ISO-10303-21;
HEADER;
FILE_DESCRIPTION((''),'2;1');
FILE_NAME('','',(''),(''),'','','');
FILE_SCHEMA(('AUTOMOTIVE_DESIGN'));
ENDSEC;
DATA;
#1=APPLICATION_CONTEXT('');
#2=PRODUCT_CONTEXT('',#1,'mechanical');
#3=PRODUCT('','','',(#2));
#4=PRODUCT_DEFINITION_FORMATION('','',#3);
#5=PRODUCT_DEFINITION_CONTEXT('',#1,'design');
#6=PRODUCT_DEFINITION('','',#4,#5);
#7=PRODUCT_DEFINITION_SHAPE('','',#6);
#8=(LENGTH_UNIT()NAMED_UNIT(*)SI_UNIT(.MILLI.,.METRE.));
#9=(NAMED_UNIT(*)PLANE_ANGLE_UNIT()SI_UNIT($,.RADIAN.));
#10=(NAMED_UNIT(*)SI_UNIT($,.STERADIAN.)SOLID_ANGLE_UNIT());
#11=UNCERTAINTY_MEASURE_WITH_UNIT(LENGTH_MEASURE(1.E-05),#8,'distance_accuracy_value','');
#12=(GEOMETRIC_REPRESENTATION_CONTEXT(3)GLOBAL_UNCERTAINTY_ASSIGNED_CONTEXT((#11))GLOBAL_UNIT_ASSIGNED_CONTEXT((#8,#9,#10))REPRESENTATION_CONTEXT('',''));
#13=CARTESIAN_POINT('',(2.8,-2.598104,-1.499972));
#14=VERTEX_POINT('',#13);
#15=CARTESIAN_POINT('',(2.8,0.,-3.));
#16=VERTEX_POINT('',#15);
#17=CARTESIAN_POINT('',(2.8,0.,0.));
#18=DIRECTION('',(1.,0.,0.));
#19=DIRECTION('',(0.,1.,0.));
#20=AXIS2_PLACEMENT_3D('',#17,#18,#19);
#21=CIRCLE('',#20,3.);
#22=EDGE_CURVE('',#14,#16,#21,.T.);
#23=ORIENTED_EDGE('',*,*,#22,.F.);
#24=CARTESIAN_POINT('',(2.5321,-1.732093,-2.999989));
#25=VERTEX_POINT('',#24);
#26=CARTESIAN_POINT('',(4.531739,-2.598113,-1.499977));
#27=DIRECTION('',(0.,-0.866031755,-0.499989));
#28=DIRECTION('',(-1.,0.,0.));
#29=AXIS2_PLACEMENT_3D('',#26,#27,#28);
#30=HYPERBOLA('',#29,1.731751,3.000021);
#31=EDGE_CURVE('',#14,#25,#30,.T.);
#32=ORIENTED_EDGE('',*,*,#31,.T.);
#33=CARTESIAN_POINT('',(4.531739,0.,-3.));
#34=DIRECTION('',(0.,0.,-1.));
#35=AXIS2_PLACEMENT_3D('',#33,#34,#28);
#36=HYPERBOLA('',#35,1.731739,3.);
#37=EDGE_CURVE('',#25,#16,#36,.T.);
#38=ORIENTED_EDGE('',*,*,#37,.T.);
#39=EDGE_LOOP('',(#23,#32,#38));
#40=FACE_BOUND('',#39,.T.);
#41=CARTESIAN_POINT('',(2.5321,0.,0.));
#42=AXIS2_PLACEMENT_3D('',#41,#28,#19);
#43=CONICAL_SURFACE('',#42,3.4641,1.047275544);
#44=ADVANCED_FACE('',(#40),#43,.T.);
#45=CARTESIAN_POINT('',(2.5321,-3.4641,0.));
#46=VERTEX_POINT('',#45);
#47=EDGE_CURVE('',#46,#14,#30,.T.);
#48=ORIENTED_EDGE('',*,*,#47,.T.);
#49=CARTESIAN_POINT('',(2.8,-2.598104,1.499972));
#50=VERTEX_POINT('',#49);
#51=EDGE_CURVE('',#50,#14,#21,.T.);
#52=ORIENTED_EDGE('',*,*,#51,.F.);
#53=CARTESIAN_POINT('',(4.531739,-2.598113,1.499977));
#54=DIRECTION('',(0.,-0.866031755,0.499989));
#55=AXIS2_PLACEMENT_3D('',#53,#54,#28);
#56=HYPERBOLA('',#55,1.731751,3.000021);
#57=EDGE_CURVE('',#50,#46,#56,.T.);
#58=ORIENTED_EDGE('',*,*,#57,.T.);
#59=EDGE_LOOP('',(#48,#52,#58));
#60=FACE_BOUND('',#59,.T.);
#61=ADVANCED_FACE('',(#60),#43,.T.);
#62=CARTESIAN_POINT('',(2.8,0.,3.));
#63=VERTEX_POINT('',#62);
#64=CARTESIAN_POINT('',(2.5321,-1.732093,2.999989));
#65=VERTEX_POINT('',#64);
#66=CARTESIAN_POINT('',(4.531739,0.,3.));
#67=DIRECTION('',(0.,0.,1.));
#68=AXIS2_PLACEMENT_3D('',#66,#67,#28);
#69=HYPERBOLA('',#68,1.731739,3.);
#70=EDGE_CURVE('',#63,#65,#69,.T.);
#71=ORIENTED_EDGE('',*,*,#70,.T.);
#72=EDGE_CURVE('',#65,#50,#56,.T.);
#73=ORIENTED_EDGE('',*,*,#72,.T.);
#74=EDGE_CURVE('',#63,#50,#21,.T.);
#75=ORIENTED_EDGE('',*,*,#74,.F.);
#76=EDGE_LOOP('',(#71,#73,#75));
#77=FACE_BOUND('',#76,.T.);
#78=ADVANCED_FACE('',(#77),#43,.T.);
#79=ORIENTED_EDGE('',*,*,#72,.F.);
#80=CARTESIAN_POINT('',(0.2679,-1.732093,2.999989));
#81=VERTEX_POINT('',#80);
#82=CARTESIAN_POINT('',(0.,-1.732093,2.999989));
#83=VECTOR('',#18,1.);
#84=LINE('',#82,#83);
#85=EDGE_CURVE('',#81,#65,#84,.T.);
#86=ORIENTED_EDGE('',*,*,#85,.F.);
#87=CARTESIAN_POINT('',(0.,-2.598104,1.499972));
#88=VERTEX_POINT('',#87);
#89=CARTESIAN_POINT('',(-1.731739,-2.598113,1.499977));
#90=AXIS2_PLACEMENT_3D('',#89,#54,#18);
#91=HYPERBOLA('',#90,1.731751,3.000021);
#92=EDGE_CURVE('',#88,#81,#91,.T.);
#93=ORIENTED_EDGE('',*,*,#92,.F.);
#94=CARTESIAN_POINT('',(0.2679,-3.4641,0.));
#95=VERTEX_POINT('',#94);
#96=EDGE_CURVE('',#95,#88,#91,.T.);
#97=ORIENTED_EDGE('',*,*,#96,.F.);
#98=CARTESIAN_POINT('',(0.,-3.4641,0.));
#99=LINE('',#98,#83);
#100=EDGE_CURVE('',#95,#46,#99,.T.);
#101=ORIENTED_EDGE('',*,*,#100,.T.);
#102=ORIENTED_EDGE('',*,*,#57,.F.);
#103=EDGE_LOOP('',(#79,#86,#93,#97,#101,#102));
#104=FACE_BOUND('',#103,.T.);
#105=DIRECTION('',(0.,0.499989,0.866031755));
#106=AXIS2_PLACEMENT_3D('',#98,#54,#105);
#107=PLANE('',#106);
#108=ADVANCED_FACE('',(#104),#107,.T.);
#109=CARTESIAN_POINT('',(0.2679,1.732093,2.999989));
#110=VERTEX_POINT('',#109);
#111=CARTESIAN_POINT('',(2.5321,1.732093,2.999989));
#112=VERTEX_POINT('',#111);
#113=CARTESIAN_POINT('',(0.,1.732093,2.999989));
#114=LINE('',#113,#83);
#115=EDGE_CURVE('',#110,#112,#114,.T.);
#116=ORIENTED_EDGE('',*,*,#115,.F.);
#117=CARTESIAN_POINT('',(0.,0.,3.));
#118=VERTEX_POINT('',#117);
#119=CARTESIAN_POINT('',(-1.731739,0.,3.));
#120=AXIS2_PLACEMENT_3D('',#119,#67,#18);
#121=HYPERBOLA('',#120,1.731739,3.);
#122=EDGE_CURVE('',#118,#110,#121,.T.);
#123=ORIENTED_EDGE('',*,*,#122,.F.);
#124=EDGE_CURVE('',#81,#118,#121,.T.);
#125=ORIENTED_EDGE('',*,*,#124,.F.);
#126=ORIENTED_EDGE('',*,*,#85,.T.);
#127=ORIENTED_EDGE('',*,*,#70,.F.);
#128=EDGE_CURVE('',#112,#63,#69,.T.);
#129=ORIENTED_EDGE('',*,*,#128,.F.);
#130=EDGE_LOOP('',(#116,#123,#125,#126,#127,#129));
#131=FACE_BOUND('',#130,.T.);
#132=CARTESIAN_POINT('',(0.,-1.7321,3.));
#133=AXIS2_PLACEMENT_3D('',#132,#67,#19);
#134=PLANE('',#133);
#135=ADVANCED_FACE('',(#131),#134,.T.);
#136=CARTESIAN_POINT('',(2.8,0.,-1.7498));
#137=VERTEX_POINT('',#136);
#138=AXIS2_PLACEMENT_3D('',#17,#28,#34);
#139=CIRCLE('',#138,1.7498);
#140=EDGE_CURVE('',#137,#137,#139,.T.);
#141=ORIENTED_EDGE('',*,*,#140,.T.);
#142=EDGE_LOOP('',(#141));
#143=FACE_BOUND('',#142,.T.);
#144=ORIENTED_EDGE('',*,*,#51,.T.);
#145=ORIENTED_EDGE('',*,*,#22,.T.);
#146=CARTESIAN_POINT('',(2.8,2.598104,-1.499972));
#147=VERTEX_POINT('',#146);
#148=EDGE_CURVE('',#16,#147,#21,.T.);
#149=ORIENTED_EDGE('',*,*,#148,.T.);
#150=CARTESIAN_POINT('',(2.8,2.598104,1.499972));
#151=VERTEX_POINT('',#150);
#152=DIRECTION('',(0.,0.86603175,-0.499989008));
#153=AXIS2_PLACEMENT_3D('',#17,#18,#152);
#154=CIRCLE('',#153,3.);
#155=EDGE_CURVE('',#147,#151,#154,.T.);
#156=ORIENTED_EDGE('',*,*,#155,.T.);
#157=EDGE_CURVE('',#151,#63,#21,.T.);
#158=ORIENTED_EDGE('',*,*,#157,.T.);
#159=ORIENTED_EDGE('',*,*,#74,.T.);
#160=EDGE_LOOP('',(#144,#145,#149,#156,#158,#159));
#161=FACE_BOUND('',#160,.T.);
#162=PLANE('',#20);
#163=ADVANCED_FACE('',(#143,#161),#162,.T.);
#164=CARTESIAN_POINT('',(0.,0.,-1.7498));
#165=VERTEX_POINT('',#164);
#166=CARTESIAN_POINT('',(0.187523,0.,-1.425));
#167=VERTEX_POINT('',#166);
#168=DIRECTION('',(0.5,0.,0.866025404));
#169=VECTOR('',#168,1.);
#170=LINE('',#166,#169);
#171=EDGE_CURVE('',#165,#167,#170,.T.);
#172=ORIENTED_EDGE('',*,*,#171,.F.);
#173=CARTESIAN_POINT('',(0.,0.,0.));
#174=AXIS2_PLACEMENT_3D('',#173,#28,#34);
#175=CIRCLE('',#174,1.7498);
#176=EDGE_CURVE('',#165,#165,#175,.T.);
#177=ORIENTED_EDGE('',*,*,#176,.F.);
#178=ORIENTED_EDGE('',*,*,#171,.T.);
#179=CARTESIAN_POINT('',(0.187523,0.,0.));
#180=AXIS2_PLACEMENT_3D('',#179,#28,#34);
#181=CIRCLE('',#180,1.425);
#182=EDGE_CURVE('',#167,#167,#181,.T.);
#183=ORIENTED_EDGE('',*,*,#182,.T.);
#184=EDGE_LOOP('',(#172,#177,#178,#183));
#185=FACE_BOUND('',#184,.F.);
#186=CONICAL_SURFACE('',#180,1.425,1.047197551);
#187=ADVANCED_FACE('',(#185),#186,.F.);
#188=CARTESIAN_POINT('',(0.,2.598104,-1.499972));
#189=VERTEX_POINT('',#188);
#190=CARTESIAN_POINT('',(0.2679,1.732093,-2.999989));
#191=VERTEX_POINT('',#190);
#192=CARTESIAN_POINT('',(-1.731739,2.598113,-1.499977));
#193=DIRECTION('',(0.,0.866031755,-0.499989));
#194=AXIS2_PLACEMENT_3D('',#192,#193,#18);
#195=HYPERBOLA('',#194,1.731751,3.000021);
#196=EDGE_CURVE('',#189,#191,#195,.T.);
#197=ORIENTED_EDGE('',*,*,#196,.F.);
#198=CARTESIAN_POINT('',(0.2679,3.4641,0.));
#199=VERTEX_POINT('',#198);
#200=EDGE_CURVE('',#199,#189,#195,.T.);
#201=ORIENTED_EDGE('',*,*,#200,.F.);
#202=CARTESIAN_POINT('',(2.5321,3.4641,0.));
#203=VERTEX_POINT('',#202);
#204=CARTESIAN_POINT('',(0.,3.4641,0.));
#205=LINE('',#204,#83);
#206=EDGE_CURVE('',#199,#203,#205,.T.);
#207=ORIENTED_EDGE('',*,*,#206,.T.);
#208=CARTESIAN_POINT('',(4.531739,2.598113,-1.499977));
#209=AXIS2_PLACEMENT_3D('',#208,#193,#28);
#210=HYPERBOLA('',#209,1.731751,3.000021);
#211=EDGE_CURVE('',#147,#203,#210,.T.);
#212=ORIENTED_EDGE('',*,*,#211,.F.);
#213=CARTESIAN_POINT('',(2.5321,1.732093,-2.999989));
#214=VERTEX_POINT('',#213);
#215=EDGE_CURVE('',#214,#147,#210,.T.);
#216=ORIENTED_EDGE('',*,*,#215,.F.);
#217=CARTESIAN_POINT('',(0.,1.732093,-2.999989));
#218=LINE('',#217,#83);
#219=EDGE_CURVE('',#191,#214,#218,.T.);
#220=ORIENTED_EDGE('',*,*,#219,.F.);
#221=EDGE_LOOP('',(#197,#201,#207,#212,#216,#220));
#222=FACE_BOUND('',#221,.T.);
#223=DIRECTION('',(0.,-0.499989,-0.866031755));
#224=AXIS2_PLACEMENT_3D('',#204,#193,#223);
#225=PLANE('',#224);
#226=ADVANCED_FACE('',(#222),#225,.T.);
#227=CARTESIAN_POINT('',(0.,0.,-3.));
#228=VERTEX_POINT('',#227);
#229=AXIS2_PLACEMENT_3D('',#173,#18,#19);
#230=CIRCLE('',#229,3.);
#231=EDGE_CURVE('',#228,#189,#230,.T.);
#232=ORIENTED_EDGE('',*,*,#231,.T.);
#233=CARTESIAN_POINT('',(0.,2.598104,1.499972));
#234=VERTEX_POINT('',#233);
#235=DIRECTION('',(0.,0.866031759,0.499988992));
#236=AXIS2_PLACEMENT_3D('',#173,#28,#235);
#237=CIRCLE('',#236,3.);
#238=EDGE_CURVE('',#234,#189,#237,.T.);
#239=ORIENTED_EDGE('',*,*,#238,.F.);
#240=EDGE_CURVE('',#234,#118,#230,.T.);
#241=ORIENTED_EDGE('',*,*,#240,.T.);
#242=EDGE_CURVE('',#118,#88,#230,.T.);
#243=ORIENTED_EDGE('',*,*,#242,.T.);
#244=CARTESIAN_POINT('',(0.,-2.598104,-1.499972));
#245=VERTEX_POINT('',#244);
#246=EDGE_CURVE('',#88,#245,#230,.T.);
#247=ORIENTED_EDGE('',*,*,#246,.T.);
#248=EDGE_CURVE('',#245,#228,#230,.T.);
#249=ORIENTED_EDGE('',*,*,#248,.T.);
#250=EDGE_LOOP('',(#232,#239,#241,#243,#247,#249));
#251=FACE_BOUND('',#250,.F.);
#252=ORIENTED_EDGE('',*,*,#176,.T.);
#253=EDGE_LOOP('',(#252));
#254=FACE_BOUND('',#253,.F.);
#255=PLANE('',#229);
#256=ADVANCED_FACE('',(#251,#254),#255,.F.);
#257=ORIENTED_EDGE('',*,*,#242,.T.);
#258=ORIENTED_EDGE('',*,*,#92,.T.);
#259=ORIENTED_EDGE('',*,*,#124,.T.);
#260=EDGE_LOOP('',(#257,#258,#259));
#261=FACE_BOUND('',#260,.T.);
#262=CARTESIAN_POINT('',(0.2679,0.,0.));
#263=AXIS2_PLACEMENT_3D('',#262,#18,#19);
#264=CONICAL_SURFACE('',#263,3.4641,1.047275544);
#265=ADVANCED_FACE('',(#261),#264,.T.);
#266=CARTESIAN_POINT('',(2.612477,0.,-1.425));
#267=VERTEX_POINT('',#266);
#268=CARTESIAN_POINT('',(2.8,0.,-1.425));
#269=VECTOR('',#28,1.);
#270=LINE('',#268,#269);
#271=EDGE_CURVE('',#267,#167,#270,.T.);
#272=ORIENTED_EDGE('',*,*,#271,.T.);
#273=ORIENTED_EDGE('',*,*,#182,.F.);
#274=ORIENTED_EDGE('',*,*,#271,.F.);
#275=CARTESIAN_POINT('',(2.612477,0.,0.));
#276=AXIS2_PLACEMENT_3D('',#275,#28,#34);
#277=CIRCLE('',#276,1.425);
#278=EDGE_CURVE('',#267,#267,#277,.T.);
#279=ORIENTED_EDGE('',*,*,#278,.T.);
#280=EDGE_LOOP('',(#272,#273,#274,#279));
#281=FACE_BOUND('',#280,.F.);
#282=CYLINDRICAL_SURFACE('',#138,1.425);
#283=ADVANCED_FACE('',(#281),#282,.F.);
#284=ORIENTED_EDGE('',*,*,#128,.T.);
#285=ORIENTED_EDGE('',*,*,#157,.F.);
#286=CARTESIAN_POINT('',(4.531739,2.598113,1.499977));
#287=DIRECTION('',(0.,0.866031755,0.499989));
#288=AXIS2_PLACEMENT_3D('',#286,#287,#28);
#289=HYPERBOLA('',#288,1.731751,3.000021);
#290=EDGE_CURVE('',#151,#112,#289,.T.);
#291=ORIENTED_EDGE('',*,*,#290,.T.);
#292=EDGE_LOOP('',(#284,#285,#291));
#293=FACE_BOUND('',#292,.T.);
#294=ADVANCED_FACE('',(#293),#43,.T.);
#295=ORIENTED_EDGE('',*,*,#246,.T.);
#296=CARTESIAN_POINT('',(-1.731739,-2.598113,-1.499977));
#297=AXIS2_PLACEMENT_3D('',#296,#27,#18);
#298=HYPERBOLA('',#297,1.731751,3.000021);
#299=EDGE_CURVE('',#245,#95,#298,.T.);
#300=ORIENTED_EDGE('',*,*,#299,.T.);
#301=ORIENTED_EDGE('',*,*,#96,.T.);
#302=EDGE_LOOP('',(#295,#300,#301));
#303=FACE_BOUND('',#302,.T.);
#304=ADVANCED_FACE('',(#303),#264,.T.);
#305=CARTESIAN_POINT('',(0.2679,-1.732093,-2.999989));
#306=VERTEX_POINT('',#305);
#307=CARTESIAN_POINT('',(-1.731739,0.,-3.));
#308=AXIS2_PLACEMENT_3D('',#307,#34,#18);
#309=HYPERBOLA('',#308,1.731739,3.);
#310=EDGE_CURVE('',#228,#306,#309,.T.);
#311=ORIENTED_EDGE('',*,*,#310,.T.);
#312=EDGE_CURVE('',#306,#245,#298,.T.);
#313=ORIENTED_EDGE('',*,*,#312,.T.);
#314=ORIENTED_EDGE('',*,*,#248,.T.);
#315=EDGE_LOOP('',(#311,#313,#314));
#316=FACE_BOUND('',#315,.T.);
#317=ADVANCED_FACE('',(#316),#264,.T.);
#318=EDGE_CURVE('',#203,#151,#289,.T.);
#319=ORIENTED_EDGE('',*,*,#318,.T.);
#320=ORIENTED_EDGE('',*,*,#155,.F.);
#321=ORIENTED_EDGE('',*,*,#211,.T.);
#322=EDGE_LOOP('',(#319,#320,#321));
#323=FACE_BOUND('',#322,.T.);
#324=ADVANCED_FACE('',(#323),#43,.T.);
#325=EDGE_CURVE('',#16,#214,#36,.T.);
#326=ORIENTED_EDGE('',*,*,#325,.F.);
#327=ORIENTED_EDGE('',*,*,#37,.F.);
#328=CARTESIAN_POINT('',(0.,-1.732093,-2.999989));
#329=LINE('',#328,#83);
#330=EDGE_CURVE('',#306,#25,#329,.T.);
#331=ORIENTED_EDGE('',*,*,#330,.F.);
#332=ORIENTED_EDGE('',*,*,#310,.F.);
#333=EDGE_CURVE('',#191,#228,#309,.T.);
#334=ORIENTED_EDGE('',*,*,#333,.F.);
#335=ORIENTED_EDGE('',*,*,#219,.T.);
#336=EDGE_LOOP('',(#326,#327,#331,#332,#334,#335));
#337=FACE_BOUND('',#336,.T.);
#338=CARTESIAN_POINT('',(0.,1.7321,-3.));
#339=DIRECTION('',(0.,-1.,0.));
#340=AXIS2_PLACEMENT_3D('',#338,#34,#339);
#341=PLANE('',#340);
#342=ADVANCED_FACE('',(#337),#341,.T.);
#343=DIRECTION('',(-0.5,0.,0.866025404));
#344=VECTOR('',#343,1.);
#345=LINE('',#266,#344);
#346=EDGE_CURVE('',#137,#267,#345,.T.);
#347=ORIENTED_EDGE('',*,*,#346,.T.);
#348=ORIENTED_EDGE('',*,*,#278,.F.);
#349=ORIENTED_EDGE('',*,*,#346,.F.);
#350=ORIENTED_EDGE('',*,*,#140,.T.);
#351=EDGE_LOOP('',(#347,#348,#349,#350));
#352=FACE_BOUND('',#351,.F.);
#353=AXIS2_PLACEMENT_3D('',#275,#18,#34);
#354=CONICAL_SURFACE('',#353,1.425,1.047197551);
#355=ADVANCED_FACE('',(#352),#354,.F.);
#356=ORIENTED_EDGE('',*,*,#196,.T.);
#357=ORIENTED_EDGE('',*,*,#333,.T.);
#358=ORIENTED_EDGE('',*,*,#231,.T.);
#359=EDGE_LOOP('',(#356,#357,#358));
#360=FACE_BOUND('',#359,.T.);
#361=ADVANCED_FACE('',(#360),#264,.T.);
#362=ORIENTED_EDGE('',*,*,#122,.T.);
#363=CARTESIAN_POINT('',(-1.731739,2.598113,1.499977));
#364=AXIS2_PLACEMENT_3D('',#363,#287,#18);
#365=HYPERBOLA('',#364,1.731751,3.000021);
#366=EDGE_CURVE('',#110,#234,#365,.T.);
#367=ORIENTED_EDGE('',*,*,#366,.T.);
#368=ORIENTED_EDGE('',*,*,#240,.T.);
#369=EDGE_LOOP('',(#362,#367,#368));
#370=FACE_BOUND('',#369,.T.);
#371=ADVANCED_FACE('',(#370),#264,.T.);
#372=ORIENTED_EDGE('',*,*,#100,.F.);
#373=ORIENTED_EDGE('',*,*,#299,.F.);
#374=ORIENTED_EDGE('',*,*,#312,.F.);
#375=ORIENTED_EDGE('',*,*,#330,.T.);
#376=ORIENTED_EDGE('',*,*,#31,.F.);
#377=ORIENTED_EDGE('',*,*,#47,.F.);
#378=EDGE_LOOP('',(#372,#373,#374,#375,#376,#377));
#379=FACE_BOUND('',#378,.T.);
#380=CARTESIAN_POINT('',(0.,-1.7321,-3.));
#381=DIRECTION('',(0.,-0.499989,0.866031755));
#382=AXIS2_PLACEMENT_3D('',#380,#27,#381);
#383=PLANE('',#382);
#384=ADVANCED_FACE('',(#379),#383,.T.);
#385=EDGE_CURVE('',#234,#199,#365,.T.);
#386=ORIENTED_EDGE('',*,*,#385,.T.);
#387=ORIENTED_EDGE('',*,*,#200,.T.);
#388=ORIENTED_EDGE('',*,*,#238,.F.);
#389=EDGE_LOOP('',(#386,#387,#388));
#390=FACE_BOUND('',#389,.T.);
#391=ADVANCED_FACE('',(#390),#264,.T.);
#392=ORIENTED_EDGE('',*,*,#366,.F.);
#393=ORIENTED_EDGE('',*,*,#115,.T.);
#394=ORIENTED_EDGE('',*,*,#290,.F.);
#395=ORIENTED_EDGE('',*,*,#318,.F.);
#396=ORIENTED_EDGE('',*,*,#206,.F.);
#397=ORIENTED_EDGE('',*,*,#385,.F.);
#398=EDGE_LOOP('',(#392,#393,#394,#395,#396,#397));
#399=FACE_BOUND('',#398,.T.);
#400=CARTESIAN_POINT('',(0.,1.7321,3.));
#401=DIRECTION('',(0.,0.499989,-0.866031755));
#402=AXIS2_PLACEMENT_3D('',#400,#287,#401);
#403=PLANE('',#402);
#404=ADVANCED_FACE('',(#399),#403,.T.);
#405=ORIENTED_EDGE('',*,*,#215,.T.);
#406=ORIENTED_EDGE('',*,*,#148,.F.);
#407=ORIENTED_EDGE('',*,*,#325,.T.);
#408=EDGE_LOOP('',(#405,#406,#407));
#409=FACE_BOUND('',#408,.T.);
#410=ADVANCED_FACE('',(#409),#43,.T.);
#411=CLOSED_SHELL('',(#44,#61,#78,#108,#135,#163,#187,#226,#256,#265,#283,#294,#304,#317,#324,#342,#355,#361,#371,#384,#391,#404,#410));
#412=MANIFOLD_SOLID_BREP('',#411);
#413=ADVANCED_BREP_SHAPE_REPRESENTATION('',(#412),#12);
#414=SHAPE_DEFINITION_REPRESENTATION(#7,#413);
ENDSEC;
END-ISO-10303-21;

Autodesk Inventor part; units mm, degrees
ref_plane "YZ Plane" through (0, 0, 0) normal (1, 0, 0) x (0, 1, 0)
ref_plane "XZ Plane" through (0, 0, 0) normal (0, 1, 0) x (-1, 0, 0)
sketch "Эскиз1" plane through (0, 0, 0) normal (1, 0, 0) x (0, 1, 0)
  line L0 (-3.4641, 0) -> (-1.7321, 3)
  line L1 (-1.7321, 3) -> (1.7321, 3)
  line L2 (1.7321, 3) -> (3.4641, 0)
  line L3 (3.4641, 0) -> (1.7321, -3)
  line L4 (1.7321, -3) -> (-1.7321, -3)
  line L5 (-1.7321, -3) -> (-3.4641, 0)
  point P0 (0, 0)
  point P1 (0, 0)
  dimension "d0" = 6.9282
extrude "Базовый элемент" add sketch "Эскиз1" along normal blind 2.8
sketch "Эскиз2" plane through (0, 0, 0) normal (0, 0, 1) x (1, 0, 0)
  line L0 (0, 1.7321) -> (0, 3.4641) projected
  line L1 (0, 3.4641) -> (2.8, 3.4641) projected
  line L2 (2.8, 1.7321) -> (2.8, 3.4641) projected
  line L3 (-0.56, 0) -> (3.36, 0) projected
  line L4 (0.2679, 3.4641) -> (0, 3)
  line L5 (2.5321, 3.4641) -> (2.8, 3)
  dimension "d3" = 30
  dimension "d4" = 30
  dimension "d5" = 6
  dimension "d6" = 6
revolve "Фаска1" cut sketch "Эскиз2" angle 360 about axis through (-10, 0, 0) along (1, 0, 0)
sketch "Эскиз3" plane through (2.8, 0, 0) normal (1, 0, 0) x (0, 0, -1)
  arc A0 (-1.5, -2.5981) -> (1.5, -2.5981) centre (0, 0) ccw projected
hole "Резьба" at (2.8, 0, 0) direction (-1, 0, 0) diameter 2.85 end through all thread size "M3.5x0.6" class "6H" standard "ISO Metric profile"
chamfer "Фаска2" distance 0.3248 angle 30 1 edges at (2.8, 0, 1.425) measured on face at (2.8, -2.4606, -0.0573)
chamfer "Фаска3" distance 0.3248 angle 30 1 edges at (0, 0, 1.425) measured on face at (0, -2.4606, -0.0573)
ref_plane "Work Plane1" through (-6.7833, 0, 0) normal (0, -0.8660254, -0.5) x (1, 0, 0)
equation "\"d0\" = 1.1547 * SW"
equation "\"d1\" = KOH"
equation "\"d3\" = ANG1"
equation "\"d4\" = ANG2"
equation "\"d5\" = SW0"
equation "\"d6\" = SW01"
equation "\"d8\" = -0.5 * GD1 + 0.5 * NND"
equation "\"d40\" = -0.5 * GD1 + 0.5 * NND"
equation "\"d10\" = -0.5 * GD1 + 0.5 * NND"
equation "\"d41\" = -0.5 * GD1 + 0.5 * NND"
equation "\"ANG1\" = 30deg"
equation "\"ANG2\" = 30deg"
equation "\"NND\" = 3.5"
equation "\"KOH\" = 2.8"
equation "\"SW\" = 6"
equation "\"SW0\" = SW"
equation "\"SW01\" = SW"
equation "\"GUL\" = 0.541266 * PTC"
equation "\"WFT\" = 0"
equation "\"THREADDIA\" = 3.5"
equation "\"TOA\" = 30deg"
equation "\"PTC\" = 0.6"
equation "\"E0\" = 1.155 * SW"
equation "\"GAL\" = 0.541266 * PTC"
equation "\"GD1\" = 2.850481"
properties part number "AS 1112 - M3,5  Тип 10" material "Сталь, мягкая"
